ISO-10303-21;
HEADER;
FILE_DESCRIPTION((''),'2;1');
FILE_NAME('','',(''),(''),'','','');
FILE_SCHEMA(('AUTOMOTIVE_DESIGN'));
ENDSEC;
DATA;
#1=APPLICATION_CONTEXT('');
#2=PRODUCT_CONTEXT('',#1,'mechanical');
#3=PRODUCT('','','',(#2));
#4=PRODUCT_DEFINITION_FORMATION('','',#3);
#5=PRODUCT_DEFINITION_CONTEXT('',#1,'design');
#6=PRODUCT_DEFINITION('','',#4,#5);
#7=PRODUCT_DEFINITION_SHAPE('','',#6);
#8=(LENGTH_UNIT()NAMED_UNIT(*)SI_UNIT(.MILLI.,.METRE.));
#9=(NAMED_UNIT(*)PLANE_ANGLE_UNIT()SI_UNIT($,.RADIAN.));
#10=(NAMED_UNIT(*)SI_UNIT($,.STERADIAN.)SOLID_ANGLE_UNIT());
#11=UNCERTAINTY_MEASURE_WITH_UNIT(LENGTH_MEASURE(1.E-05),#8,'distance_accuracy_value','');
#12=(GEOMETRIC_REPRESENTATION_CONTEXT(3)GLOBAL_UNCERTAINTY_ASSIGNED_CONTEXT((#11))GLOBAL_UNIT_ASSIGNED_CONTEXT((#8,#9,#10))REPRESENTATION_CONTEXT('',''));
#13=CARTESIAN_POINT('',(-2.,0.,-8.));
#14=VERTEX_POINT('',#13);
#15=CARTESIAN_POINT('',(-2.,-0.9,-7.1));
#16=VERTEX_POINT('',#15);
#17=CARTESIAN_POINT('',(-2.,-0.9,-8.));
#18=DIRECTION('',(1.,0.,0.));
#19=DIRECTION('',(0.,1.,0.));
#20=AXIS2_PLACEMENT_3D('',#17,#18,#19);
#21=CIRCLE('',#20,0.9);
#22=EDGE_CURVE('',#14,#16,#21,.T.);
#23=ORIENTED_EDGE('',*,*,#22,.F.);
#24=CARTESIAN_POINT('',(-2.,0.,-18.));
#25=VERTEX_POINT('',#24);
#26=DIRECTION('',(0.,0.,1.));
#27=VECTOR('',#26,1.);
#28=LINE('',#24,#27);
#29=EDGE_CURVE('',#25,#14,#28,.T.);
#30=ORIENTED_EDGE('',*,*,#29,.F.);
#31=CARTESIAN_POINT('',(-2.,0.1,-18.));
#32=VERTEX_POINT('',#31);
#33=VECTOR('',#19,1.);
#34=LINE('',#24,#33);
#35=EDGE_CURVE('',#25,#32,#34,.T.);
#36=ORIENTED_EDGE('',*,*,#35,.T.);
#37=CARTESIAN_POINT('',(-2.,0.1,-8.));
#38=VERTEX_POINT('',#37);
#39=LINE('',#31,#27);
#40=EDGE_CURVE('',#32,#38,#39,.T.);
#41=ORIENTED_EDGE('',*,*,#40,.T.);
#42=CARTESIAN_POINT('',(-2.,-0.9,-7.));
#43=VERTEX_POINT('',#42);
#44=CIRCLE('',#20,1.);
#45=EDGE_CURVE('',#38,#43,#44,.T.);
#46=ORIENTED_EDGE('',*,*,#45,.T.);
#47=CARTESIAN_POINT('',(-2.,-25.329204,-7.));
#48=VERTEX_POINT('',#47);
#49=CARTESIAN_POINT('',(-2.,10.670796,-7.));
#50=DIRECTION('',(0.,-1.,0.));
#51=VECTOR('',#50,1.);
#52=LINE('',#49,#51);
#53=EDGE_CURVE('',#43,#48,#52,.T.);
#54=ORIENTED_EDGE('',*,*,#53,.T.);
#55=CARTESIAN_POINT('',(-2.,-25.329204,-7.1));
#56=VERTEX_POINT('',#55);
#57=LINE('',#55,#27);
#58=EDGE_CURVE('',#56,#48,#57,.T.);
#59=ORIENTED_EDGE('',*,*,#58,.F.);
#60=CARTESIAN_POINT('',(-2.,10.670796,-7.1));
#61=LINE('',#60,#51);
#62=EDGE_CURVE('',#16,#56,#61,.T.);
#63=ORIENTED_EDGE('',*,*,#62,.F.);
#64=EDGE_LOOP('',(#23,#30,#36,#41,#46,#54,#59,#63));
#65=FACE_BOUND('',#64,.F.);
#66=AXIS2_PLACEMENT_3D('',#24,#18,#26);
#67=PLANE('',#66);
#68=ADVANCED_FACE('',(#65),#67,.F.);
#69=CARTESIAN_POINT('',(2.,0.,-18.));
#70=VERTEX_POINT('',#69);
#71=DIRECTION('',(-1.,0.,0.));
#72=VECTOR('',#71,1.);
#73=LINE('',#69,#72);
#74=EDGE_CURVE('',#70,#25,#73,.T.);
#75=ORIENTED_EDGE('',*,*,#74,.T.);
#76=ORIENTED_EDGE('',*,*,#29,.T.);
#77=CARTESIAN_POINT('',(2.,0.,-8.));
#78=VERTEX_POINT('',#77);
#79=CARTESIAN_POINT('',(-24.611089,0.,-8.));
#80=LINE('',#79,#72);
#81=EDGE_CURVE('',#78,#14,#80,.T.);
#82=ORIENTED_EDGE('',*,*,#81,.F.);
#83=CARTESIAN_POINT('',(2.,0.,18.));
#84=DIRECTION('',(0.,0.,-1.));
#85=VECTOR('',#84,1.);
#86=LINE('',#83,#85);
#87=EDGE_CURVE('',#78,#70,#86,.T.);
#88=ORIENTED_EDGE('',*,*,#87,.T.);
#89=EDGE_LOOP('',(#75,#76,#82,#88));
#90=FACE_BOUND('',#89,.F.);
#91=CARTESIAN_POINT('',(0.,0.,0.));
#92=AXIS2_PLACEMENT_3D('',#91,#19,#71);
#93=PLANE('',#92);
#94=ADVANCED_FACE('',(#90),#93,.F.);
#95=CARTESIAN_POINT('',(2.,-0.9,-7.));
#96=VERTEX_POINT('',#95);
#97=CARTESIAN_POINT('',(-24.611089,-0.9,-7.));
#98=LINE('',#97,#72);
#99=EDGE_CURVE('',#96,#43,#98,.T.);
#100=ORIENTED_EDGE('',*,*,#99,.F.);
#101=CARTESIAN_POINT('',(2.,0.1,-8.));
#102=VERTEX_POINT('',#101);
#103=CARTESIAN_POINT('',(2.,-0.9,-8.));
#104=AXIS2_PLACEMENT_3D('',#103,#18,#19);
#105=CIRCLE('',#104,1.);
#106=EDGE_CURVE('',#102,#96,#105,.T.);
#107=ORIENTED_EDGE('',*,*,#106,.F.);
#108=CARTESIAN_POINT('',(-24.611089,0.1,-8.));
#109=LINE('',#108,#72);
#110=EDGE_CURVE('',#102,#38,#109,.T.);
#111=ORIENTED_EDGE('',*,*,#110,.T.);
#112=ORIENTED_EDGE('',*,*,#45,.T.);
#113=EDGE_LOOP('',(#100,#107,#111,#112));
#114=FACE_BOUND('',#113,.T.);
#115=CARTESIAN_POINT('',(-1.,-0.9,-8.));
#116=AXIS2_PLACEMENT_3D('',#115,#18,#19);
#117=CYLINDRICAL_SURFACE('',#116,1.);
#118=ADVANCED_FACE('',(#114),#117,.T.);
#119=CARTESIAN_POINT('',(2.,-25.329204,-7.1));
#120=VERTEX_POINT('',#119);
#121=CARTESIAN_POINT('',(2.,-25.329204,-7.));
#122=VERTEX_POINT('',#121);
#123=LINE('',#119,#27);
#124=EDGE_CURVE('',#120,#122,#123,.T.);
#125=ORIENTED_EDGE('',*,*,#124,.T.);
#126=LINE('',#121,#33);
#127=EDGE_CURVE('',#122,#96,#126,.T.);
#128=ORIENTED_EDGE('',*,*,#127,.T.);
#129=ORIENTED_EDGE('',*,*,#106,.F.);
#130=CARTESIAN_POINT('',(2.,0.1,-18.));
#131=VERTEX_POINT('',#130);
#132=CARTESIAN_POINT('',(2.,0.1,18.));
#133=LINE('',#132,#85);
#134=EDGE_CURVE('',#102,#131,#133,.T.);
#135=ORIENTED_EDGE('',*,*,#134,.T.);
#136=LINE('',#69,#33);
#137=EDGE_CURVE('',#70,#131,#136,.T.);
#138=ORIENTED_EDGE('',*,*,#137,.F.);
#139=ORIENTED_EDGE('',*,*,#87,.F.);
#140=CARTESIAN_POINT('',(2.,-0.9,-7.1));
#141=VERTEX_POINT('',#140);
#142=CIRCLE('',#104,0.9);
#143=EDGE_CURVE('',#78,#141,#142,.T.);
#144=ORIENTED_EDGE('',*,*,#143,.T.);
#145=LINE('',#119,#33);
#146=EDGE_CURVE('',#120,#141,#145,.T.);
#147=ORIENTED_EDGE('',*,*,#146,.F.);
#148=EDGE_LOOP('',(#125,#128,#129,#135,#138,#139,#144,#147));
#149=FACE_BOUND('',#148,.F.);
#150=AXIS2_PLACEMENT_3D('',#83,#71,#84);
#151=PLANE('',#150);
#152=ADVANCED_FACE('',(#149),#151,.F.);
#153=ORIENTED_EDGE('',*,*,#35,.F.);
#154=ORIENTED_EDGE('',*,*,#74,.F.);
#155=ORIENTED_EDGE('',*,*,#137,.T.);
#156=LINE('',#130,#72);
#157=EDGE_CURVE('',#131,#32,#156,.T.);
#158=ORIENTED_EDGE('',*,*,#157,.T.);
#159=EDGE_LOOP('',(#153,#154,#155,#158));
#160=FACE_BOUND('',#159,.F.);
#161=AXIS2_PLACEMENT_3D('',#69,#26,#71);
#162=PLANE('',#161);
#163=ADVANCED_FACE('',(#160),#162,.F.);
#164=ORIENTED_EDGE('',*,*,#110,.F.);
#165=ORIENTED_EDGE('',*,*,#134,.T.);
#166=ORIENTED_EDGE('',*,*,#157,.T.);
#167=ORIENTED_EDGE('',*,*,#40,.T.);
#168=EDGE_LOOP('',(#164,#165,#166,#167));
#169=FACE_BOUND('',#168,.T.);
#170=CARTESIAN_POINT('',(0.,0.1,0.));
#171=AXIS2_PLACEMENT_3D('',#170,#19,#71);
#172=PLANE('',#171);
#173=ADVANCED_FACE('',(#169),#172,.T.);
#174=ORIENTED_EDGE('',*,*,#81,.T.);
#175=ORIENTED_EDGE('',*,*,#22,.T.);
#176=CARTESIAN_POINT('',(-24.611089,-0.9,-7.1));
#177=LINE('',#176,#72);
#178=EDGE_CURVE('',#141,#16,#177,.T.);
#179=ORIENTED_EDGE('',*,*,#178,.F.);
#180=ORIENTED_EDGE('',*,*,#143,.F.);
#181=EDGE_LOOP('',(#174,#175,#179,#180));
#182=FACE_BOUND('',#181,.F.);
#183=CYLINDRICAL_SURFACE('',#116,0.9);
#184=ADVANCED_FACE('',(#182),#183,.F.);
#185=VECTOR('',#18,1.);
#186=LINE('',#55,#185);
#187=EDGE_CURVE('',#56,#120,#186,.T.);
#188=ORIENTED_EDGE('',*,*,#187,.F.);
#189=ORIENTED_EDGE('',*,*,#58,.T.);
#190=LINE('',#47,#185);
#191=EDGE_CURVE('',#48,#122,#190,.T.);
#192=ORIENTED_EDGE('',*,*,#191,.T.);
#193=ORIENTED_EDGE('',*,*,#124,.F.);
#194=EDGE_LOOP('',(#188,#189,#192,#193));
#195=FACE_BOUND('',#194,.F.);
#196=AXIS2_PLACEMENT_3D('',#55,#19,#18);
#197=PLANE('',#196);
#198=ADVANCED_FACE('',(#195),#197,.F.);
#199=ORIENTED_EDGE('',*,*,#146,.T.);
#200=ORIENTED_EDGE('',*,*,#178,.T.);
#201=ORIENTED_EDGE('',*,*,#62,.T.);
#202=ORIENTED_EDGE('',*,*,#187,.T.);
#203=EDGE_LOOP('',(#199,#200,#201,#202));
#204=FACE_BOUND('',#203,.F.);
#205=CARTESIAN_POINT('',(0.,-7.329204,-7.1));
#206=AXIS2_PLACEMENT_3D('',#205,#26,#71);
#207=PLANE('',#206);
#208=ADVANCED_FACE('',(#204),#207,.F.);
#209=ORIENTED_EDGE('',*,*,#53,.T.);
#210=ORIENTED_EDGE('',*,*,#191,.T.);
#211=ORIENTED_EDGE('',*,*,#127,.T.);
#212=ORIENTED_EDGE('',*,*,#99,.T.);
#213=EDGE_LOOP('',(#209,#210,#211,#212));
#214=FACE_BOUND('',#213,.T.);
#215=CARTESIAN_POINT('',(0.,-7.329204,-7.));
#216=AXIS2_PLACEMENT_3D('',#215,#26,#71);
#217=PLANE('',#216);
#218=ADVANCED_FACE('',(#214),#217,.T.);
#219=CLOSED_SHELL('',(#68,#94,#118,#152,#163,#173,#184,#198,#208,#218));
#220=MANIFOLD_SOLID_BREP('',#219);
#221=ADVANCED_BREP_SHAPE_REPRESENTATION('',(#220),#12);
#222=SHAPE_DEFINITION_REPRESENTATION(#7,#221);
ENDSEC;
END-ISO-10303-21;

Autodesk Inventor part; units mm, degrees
ref_plane "YZ Plane" through (0, 0, 0) normal (1, 0, 0) x (0, 1, 0)
ref_plane "XZ Plane" through (0, 0, 0) normal (0, 1, 0) x (-1, 0, 0)
ref_plane "XY Plane" through (0, 0, 0) normal (0, 0, 1) x (1, 0, 0)
sketch "Sketch1" plane through (0, 0, 0) normal (0, 1, 0) x (-1, 0, 0)
  line L0 (-2, 18) -> (-2, -18)
  line L1 (-2, -18) -> (2, -18)
  line L2 (2, -18) -> (2, 18)
  line L3 (2, 18) -> (-2, 18)
  line L4 (-2, 18) -> (2, -18) construction
  line L5 (-2, -18) -> (2, 18) construction
  point P0 (0, 0)
extrude "Extrusion1" add sketch "Sketch1" along normal blind 0.1
sketch "Sketch2" plane through (0, 0.1, 0) normal (0, 1, 0) x (1, 0, 0)
  line L0 (2, -18) -> (2, 18) projected
  line L1 (2, 18) -> (-2, 18) projected
  line L2 (-2, 18) -> (-2, -18) projected
  line L3 (-2, 8) -> (2, 8)
  point P0 (0, 0)
  dimension "d2" = 10
bend part "Bend Part1" radius 1 angle 90 line through (-2, 0.1, -8) along (1, 0, 0) centre toward (0, -1, 0) moving side (0, 0, 1) both sides no
properties part number "PIElectrodes"
